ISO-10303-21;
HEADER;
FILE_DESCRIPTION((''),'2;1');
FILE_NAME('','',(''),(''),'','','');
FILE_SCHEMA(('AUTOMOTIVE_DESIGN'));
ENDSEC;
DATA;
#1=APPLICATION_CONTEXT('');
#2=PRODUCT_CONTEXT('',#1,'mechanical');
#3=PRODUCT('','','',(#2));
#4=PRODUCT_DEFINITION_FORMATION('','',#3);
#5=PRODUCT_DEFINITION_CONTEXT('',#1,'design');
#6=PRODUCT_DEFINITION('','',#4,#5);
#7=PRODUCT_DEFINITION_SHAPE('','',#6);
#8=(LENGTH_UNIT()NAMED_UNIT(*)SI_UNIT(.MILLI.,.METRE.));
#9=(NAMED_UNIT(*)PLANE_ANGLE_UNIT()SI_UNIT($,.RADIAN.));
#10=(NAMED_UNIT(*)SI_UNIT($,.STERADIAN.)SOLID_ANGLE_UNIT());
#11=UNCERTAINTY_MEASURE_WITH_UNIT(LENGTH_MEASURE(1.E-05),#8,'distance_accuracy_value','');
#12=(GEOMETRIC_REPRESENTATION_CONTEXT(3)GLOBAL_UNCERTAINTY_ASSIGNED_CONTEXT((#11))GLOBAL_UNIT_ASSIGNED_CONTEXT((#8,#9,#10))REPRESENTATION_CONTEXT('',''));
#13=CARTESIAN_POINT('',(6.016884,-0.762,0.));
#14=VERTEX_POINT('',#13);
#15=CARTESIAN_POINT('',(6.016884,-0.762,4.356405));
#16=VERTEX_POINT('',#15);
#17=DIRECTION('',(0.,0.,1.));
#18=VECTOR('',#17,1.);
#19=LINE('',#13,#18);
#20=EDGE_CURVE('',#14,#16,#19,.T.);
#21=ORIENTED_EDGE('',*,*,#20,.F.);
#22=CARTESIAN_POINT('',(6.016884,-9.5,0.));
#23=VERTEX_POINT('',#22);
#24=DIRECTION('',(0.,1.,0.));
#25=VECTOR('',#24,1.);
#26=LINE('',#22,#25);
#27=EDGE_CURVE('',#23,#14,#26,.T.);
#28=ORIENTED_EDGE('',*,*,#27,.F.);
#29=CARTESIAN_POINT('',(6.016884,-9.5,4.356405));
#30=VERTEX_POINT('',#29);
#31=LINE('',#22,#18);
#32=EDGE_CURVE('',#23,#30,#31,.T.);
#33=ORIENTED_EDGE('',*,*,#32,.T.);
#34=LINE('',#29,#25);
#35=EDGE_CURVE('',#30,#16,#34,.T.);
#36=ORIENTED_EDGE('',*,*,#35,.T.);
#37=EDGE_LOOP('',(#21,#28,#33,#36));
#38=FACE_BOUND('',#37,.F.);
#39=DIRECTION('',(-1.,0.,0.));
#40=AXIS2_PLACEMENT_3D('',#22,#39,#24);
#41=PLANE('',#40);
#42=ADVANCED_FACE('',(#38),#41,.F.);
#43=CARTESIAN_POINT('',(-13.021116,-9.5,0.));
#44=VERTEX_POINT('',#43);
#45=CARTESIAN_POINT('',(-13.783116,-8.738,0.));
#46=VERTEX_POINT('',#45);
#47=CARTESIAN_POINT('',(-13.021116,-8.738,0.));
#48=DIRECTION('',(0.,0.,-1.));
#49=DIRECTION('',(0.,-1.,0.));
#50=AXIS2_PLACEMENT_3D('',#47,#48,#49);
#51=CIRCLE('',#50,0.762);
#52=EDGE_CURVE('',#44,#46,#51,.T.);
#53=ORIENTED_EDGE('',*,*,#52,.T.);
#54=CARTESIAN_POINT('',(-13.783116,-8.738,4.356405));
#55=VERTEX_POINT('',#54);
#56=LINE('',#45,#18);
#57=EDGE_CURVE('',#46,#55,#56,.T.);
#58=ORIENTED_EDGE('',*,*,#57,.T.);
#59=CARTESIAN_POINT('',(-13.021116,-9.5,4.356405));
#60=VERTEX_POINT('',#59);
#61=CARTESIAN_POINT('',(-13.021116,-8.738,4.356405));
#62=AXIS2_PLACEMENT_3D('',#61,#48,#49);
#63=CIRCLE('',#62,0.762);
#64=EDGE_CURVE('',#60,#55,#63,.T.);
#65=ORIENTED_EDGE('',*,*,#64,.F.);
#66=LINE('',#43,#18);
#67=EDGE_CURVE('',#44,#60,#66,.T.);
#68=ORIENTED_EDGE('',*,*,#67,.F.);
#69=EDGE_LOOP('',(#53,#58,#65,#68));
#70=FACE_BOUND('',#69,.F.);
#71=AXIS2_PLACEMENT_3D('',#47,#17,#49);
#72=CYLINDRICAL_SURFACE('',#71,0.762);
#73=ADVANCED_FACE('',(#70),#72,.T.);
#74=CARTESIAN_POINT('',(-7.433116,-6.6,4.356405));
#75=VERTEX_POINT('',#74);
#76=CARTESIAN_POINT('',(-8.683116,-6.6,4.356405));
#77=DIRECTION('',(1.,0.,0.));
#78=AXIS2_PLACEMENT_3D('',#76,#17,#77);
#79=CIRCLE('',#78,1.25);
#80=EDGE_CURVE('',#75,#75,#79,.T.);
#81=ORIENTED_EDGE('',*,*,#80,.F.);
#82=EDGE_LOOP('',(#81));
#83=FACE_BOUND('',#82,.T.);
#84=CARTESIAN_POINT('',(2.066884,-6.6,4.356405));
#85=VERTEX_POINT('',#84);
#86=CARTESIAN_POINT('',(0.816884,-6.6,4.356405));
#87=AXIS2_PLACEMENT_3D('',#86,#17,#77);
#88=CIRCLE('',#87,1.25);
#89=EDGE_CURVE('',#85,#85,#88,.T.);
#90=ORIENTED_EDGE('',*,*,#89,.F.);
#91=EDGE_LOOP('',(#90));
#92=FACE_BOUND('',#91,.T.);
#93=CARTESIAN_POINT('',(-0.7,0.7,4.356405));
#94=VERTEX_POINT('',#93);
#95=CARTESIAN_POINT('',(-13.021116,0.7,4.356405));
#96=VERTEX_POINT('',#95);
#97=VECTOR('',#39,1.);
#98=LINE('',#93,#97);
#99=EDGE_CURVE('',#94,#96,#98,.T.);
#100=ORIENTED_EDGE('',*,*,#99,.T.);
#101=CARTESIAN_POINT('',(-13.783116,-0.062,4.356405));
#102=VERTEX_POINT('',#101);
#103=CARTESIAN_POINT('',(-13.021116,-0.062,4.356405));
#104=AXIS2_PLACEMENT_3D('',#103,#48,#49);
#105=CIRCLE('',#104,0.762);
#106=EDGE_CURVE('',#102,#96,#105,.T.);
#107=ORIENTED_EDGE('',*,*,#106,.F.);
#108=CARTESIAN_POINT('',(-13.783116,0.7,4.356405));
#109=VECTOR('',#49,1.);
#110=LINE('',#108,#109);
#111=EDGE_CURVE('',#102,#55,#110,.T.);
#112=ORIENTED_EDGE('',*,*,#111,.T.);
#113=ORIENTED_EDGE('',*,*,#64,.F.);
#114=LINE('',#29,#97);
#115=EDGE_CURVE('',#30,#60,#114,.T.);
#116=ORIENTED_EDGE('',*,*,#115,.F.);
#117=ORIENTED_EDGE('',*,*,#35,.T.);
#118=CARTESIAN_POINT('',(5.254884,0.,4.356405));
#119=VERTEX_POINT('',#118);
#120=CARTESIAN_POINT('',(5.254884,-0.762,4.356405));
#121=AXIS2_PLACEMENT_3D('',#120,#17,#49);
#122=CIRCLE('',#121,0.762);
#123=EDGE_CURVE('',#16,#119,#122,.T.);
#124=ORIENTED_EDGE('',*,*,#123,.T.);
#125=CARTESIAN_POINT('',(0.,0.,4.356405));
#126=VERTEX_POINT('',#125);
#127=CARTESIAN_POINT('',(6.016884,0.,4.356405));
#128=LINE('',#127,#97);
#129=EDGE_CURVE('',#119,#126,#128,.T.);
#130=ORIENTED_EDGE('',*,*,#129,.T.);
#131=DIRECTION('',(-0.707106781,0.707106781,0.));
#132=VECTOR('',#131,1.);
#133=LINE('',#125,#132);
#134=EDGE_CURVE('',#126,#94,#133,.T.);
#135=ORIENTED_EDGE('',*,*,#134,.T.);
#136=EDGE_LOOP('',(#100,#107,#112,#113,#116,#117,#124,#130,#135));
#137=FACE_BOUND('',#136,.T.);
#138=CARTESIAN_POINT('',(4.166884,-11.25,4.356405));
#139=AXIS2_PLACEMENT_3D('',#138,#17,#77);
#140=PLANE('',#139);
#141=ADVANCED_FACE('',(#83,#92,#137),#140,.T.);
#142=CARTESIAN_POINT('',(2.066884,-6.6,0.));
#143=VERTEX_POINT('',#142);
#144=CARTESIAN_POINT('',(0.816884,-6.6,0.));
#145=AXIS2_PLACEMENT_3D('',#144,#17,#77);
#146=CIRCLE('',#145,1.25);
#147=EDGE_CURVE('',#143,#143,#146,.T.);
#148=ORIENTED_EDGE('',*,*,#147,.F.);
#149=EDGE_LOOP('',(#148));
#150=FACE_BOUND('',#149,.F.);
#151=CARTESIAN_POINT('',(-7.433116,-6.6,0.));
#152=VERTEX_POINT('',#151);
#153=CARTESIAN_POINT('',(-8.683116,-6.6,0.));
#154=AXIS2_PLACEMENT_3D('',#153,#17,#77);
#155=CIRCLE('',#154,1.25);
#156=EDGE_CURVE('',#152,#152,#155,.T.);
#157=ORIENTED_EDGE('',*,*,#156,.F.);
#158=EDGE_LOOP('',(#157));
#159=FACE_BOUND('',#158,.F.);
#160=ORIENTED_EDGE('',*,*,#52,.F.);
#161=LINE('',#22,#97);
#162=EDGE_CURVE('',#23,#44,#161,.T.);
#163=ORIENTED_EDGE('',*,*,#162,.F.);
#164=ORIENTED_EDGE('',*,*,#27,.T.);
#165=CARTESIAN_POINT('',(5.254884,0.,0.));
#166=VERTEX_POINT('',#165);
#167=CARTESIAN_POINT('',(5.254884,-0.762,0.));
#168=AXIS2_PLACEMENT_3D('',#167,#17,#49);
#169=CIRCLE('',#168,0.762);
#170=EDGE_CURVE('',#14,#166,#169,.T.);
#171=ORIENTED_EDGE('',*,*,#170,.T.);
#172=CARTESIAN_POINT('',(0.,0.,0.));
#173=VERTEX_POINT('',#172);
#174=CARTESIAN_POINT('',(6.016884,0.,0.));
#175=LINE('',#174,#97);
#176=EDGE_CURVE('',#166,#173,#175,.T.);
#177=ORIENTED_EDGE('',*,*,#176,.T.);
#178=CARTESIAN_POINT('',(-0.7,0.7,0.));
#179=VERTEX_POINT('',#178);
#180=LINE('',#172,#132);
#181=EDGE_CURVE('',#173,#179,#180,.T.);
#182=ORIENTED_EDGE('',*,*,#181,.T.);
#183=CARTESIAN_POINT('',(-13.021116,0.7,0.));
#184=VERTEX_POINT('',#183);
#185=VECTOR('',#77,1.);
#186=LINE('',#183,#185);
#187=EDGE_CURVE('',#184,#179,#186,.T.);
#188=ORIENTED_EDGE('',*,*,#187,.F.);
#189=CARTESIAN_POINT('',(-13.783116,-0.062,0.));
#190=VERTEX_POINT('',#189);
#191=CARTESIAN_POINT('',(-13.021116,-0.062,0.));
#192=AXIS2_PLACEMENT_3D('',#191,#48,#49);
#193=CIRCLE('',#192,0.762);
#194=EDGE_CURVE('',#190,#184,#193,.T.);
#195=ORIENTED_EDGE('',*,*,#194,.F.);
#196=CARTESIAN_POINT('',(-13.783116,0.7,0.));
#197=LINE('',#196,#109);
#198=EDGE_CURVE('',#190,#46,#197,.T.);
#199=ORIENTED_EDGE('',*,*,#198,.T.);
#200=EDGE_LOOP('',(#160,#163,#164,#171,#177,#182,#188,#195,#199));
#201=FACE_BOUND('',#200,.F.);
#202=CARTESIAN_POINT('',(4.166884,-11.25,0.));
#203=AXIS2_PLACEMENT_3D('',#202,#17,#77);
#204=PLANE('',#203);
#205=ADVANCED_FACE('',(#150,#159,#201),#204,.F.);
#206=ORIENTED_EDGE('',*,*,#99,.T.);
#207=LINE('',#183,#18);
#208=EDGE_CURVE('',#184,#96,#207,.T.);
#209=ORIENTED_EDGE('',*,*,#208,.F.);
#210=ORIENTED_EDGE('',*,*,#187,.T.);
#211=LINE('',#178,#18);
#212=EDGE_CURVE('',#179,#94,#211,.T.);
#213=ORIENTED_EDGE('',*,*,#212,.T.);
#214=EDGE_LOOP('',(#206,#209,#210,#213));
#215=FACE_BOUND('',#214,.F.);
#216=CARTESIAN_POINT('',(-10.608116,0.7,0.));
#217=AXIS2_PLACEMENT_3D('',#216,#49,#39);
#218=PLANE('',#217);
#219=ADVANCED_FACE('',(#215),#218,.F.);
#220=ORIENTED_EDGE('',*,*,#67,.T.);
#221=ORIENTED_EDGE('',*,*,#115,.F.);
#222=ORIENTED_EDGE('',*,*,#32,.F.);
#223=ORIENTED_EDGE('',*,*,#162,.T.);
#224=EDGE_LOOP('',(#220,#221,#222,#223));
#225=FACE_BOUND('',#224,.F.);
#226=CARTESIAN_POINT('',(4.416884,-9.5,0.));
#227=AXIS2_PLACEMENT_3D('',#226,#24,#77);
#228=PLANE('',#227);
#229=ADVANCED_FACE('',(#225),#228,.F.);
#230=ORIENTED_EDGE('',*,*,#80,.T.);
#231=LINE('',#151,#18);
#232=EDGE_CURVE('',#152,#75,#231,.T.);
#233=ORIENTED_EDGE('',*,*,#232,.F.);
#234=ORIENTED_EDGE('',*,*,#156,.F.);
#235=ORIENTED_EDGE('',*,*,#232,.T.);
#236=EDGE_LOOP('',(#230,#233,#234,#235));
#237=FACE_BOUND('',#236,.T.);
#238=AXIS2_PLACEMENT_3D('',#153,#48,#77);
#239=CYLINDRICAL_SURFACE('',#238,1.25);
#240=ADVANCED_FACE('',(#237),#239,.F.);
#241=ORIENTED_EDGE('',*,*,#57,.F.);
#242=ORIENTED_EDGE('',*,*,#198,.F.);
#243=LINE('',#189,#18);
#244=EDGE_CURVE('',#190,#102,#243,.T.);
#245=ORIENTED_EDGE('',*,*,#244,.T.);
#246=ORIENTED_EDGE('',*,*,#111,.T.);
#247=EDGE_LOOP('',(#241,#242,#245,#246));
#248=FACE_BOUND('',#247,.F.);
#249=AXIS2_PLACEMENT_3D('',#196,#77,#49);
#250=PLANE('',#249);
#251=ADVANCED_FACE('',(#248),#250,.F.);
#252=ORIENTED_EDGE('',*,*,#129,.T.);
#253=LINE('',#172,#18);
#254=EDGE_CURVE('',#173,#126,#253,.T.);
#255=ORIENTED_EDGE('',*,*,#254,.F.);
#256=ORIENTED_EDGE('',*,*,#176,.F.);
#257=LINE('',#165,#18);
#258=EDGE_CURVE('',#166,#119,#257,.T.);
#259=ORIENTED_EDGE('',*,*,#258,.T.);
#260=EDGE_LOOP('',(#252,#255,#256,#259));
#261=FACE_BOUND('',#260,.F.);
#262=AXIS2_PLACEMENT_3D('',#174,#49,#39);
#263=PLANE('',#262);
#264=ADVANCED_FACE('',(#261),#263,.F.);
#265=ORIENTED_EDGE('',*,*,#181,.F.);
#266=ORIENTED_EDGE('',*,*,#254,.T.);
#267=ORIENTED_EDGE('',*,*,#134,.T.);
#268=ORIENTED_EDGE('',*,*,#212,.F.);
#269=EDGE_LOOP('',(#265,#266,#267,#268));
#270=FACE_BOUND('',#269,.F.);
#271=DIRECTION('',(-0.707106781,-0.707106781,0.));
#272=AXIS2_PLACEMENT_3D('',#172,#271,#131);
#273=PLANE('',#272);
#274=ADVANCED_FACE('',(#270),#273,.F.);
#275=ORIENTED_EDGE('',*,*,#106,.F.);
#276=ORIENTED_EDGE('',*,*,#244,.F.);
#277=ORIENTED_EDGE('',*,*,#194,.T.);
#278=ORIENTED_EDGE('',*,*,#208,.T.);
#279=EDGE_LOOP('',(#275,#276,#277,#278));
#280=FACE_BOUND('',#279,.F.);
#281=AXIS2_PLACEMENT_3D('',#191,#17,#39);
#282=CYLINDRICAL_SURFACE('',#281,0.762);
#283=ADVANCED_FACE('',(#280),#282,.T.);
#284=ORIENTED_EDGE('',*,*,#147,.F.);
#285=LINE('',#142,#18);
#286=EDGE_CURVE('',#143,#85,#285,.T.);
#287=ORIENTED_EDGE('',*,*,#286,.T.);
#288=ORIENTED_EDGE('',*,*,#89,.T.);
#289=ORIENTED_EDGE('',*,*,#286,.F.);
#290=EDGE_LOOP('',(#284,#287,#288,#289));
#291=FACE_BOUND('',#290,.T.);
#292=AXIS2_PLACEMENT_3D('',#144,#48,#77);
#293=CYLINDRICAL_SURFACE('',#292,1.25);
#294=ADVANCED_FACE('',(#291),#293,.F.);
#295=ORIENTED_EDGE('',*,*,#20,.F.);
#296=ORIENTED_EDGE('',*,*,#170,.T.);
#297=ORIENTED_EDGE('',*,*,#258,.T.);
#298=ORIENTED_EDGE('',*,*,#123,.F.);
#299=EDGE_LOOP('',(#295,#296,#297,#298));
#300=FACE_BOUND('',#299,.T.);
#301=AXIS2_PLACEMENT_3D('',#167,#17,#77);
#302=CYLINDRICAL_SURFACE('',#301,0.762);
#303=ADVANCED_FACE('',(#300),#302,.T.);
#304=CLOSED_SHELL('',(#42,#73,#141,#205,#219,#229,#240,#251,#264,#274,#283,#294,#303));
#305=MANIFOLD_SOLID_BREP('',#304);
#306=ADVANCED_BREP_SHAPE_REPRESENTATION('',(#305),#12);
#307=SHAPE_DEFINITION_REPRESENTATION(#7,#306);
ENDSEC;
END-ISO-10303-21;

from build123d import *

# Parameters (mm, degrees)
F0_W     = 0.5
F0_H     = 3.5
F0_R     = 1.25
F1_DEPTH = 4.3564048
F2_R     = 0.762
F3_W     = 19.038
F3_H     = 6.3
F3_H_2   = 3.5
F4_DEPTH = 4.3564048


with BuildPart() as f1:
    # F0 (on Top) → F1 (new body)
    with BuildSketch(Plane.XY):
        with Locations((4.1668843009, -11.25)):
            Rectangle(F0_W, F0_H)
        with Locations((-3.3831156991, -11.25)):
            Rectangle(F0_W, F0_H)
        with Locations((-11.9331156991, -11.25)):
            Rectangle(F0_W, F0_H)
        with BuildLine():
            Line((-10.6081156991, 0.7), (-9.8143656991, 0.7))
            Line((-9.8143656991, 0.7), (-9.8143656991, 1.101979753))
            ThreePointArc((-9.8143656991, 1.101979753), (-9.7252470071, 1.317131308), (-9.5100954521, 1.40625))
            Line((-9.5100954521, 1.40625), (6.0168843009, 1.40625))
            Line((6.0168843009, 1.40625), (6.0168843009, 2.2))
            Line((6.0168843009, 2.2), (6.0168843009, 4.6))
            ThreePointArc((6.0168843009, 4.6), (3.6168843009, 7), (1.2168843009, 4.6))
            Line((1.2168843009, 4.6), (1.2168843009, 2.2))
            Line((1.2168843009, 2.2), (-9.5100954521, 2.2))
            ThreePointArc((-9.5100954521, 2.2), (-10.2865130147, 1.8783973155), (-10.6081156991, 1.101979753))
            Line((-10.6081156991, 1.101979753), (-10.6081156991, 0.7))
        make_face()
        with BuildLine():
            Line((6.0168843009, 0), (0, 0))
            Line((0, 0), (-0.7, 0.7))
            Line((-0.7, 0.7), (-5.9126656991, 0.7))
            ThreePointArc((-5.9126656991, 0.7), (-6.5935156991, 1.38085), (-7.2743656991, 0.7))
            Line((-7.2743656991, 0.7), (-9.8143656991, 0.7))
            Line((-9.8143656991, 0.7), (-10.6081156991, 0.7))
            Line((-10.6081156991, 0.7), (-13.7831156991, 0.7))
            Line((-13.7831156991, 0.7), (-13.7831156991, -9.5))
            Line((-13.7831156991, -9.5), (-12.1831156991, -9.5))
            Line((-12.1831156991, -9.5), (-11.6831156991, -9.5))
            Line((-11.6831156991, -9.5), (-3.6331156991, -9.5))
            Line((-3.6331156991, -9.5), (-3.1331156991, -9.5))
            Line((-3.1331156991, -9.5), (3.9168843009, -9.5))
            Line((3.9168843009, -9.5), (4.4168843009, -9.5))
            Line((4.4168843009, -9.5), (6.0168843009, -9.5))
            Line((6.0168843009, -9.5), (6.0168843009, 0))
        make_face()
        with Locations((-8.6831156991, -6.6)):
            Circle(F0_R, mode=Mode.SUBTRACT)
        with Locations((0.8168843009, -6.6)):
            Circle(F0_R, mode=Mode.SUBTRACT)
    extrude(amount=F1_DEPTH)

    # F2
    f2_edges = [f1.edges().sort_by_distance(p)[0] for p in [
        (6.016884, 0, 2.178202),
        (-13.783116, -9.5, 2.178202),
        (-13.783116, 0.7, 2.178202),
    ]]
    fillet(f2_edges, radius=F2_R)

    # F3 (on face) → F4 (cut, through all)
    with BuildSketch(Plane.XY.offset(4.3564048)):
        with Locations((-3.5021156991, 3.85)):
            Rectangle(F3_W, F3_H)
        with Locations((-3.5021156991, -11.25)):
            Rectangle(F3_W, F3_H_2)
    extrude(amount=-F4_DEPTH, mode=Mode.SUBTRACT)


solid = f1.part
